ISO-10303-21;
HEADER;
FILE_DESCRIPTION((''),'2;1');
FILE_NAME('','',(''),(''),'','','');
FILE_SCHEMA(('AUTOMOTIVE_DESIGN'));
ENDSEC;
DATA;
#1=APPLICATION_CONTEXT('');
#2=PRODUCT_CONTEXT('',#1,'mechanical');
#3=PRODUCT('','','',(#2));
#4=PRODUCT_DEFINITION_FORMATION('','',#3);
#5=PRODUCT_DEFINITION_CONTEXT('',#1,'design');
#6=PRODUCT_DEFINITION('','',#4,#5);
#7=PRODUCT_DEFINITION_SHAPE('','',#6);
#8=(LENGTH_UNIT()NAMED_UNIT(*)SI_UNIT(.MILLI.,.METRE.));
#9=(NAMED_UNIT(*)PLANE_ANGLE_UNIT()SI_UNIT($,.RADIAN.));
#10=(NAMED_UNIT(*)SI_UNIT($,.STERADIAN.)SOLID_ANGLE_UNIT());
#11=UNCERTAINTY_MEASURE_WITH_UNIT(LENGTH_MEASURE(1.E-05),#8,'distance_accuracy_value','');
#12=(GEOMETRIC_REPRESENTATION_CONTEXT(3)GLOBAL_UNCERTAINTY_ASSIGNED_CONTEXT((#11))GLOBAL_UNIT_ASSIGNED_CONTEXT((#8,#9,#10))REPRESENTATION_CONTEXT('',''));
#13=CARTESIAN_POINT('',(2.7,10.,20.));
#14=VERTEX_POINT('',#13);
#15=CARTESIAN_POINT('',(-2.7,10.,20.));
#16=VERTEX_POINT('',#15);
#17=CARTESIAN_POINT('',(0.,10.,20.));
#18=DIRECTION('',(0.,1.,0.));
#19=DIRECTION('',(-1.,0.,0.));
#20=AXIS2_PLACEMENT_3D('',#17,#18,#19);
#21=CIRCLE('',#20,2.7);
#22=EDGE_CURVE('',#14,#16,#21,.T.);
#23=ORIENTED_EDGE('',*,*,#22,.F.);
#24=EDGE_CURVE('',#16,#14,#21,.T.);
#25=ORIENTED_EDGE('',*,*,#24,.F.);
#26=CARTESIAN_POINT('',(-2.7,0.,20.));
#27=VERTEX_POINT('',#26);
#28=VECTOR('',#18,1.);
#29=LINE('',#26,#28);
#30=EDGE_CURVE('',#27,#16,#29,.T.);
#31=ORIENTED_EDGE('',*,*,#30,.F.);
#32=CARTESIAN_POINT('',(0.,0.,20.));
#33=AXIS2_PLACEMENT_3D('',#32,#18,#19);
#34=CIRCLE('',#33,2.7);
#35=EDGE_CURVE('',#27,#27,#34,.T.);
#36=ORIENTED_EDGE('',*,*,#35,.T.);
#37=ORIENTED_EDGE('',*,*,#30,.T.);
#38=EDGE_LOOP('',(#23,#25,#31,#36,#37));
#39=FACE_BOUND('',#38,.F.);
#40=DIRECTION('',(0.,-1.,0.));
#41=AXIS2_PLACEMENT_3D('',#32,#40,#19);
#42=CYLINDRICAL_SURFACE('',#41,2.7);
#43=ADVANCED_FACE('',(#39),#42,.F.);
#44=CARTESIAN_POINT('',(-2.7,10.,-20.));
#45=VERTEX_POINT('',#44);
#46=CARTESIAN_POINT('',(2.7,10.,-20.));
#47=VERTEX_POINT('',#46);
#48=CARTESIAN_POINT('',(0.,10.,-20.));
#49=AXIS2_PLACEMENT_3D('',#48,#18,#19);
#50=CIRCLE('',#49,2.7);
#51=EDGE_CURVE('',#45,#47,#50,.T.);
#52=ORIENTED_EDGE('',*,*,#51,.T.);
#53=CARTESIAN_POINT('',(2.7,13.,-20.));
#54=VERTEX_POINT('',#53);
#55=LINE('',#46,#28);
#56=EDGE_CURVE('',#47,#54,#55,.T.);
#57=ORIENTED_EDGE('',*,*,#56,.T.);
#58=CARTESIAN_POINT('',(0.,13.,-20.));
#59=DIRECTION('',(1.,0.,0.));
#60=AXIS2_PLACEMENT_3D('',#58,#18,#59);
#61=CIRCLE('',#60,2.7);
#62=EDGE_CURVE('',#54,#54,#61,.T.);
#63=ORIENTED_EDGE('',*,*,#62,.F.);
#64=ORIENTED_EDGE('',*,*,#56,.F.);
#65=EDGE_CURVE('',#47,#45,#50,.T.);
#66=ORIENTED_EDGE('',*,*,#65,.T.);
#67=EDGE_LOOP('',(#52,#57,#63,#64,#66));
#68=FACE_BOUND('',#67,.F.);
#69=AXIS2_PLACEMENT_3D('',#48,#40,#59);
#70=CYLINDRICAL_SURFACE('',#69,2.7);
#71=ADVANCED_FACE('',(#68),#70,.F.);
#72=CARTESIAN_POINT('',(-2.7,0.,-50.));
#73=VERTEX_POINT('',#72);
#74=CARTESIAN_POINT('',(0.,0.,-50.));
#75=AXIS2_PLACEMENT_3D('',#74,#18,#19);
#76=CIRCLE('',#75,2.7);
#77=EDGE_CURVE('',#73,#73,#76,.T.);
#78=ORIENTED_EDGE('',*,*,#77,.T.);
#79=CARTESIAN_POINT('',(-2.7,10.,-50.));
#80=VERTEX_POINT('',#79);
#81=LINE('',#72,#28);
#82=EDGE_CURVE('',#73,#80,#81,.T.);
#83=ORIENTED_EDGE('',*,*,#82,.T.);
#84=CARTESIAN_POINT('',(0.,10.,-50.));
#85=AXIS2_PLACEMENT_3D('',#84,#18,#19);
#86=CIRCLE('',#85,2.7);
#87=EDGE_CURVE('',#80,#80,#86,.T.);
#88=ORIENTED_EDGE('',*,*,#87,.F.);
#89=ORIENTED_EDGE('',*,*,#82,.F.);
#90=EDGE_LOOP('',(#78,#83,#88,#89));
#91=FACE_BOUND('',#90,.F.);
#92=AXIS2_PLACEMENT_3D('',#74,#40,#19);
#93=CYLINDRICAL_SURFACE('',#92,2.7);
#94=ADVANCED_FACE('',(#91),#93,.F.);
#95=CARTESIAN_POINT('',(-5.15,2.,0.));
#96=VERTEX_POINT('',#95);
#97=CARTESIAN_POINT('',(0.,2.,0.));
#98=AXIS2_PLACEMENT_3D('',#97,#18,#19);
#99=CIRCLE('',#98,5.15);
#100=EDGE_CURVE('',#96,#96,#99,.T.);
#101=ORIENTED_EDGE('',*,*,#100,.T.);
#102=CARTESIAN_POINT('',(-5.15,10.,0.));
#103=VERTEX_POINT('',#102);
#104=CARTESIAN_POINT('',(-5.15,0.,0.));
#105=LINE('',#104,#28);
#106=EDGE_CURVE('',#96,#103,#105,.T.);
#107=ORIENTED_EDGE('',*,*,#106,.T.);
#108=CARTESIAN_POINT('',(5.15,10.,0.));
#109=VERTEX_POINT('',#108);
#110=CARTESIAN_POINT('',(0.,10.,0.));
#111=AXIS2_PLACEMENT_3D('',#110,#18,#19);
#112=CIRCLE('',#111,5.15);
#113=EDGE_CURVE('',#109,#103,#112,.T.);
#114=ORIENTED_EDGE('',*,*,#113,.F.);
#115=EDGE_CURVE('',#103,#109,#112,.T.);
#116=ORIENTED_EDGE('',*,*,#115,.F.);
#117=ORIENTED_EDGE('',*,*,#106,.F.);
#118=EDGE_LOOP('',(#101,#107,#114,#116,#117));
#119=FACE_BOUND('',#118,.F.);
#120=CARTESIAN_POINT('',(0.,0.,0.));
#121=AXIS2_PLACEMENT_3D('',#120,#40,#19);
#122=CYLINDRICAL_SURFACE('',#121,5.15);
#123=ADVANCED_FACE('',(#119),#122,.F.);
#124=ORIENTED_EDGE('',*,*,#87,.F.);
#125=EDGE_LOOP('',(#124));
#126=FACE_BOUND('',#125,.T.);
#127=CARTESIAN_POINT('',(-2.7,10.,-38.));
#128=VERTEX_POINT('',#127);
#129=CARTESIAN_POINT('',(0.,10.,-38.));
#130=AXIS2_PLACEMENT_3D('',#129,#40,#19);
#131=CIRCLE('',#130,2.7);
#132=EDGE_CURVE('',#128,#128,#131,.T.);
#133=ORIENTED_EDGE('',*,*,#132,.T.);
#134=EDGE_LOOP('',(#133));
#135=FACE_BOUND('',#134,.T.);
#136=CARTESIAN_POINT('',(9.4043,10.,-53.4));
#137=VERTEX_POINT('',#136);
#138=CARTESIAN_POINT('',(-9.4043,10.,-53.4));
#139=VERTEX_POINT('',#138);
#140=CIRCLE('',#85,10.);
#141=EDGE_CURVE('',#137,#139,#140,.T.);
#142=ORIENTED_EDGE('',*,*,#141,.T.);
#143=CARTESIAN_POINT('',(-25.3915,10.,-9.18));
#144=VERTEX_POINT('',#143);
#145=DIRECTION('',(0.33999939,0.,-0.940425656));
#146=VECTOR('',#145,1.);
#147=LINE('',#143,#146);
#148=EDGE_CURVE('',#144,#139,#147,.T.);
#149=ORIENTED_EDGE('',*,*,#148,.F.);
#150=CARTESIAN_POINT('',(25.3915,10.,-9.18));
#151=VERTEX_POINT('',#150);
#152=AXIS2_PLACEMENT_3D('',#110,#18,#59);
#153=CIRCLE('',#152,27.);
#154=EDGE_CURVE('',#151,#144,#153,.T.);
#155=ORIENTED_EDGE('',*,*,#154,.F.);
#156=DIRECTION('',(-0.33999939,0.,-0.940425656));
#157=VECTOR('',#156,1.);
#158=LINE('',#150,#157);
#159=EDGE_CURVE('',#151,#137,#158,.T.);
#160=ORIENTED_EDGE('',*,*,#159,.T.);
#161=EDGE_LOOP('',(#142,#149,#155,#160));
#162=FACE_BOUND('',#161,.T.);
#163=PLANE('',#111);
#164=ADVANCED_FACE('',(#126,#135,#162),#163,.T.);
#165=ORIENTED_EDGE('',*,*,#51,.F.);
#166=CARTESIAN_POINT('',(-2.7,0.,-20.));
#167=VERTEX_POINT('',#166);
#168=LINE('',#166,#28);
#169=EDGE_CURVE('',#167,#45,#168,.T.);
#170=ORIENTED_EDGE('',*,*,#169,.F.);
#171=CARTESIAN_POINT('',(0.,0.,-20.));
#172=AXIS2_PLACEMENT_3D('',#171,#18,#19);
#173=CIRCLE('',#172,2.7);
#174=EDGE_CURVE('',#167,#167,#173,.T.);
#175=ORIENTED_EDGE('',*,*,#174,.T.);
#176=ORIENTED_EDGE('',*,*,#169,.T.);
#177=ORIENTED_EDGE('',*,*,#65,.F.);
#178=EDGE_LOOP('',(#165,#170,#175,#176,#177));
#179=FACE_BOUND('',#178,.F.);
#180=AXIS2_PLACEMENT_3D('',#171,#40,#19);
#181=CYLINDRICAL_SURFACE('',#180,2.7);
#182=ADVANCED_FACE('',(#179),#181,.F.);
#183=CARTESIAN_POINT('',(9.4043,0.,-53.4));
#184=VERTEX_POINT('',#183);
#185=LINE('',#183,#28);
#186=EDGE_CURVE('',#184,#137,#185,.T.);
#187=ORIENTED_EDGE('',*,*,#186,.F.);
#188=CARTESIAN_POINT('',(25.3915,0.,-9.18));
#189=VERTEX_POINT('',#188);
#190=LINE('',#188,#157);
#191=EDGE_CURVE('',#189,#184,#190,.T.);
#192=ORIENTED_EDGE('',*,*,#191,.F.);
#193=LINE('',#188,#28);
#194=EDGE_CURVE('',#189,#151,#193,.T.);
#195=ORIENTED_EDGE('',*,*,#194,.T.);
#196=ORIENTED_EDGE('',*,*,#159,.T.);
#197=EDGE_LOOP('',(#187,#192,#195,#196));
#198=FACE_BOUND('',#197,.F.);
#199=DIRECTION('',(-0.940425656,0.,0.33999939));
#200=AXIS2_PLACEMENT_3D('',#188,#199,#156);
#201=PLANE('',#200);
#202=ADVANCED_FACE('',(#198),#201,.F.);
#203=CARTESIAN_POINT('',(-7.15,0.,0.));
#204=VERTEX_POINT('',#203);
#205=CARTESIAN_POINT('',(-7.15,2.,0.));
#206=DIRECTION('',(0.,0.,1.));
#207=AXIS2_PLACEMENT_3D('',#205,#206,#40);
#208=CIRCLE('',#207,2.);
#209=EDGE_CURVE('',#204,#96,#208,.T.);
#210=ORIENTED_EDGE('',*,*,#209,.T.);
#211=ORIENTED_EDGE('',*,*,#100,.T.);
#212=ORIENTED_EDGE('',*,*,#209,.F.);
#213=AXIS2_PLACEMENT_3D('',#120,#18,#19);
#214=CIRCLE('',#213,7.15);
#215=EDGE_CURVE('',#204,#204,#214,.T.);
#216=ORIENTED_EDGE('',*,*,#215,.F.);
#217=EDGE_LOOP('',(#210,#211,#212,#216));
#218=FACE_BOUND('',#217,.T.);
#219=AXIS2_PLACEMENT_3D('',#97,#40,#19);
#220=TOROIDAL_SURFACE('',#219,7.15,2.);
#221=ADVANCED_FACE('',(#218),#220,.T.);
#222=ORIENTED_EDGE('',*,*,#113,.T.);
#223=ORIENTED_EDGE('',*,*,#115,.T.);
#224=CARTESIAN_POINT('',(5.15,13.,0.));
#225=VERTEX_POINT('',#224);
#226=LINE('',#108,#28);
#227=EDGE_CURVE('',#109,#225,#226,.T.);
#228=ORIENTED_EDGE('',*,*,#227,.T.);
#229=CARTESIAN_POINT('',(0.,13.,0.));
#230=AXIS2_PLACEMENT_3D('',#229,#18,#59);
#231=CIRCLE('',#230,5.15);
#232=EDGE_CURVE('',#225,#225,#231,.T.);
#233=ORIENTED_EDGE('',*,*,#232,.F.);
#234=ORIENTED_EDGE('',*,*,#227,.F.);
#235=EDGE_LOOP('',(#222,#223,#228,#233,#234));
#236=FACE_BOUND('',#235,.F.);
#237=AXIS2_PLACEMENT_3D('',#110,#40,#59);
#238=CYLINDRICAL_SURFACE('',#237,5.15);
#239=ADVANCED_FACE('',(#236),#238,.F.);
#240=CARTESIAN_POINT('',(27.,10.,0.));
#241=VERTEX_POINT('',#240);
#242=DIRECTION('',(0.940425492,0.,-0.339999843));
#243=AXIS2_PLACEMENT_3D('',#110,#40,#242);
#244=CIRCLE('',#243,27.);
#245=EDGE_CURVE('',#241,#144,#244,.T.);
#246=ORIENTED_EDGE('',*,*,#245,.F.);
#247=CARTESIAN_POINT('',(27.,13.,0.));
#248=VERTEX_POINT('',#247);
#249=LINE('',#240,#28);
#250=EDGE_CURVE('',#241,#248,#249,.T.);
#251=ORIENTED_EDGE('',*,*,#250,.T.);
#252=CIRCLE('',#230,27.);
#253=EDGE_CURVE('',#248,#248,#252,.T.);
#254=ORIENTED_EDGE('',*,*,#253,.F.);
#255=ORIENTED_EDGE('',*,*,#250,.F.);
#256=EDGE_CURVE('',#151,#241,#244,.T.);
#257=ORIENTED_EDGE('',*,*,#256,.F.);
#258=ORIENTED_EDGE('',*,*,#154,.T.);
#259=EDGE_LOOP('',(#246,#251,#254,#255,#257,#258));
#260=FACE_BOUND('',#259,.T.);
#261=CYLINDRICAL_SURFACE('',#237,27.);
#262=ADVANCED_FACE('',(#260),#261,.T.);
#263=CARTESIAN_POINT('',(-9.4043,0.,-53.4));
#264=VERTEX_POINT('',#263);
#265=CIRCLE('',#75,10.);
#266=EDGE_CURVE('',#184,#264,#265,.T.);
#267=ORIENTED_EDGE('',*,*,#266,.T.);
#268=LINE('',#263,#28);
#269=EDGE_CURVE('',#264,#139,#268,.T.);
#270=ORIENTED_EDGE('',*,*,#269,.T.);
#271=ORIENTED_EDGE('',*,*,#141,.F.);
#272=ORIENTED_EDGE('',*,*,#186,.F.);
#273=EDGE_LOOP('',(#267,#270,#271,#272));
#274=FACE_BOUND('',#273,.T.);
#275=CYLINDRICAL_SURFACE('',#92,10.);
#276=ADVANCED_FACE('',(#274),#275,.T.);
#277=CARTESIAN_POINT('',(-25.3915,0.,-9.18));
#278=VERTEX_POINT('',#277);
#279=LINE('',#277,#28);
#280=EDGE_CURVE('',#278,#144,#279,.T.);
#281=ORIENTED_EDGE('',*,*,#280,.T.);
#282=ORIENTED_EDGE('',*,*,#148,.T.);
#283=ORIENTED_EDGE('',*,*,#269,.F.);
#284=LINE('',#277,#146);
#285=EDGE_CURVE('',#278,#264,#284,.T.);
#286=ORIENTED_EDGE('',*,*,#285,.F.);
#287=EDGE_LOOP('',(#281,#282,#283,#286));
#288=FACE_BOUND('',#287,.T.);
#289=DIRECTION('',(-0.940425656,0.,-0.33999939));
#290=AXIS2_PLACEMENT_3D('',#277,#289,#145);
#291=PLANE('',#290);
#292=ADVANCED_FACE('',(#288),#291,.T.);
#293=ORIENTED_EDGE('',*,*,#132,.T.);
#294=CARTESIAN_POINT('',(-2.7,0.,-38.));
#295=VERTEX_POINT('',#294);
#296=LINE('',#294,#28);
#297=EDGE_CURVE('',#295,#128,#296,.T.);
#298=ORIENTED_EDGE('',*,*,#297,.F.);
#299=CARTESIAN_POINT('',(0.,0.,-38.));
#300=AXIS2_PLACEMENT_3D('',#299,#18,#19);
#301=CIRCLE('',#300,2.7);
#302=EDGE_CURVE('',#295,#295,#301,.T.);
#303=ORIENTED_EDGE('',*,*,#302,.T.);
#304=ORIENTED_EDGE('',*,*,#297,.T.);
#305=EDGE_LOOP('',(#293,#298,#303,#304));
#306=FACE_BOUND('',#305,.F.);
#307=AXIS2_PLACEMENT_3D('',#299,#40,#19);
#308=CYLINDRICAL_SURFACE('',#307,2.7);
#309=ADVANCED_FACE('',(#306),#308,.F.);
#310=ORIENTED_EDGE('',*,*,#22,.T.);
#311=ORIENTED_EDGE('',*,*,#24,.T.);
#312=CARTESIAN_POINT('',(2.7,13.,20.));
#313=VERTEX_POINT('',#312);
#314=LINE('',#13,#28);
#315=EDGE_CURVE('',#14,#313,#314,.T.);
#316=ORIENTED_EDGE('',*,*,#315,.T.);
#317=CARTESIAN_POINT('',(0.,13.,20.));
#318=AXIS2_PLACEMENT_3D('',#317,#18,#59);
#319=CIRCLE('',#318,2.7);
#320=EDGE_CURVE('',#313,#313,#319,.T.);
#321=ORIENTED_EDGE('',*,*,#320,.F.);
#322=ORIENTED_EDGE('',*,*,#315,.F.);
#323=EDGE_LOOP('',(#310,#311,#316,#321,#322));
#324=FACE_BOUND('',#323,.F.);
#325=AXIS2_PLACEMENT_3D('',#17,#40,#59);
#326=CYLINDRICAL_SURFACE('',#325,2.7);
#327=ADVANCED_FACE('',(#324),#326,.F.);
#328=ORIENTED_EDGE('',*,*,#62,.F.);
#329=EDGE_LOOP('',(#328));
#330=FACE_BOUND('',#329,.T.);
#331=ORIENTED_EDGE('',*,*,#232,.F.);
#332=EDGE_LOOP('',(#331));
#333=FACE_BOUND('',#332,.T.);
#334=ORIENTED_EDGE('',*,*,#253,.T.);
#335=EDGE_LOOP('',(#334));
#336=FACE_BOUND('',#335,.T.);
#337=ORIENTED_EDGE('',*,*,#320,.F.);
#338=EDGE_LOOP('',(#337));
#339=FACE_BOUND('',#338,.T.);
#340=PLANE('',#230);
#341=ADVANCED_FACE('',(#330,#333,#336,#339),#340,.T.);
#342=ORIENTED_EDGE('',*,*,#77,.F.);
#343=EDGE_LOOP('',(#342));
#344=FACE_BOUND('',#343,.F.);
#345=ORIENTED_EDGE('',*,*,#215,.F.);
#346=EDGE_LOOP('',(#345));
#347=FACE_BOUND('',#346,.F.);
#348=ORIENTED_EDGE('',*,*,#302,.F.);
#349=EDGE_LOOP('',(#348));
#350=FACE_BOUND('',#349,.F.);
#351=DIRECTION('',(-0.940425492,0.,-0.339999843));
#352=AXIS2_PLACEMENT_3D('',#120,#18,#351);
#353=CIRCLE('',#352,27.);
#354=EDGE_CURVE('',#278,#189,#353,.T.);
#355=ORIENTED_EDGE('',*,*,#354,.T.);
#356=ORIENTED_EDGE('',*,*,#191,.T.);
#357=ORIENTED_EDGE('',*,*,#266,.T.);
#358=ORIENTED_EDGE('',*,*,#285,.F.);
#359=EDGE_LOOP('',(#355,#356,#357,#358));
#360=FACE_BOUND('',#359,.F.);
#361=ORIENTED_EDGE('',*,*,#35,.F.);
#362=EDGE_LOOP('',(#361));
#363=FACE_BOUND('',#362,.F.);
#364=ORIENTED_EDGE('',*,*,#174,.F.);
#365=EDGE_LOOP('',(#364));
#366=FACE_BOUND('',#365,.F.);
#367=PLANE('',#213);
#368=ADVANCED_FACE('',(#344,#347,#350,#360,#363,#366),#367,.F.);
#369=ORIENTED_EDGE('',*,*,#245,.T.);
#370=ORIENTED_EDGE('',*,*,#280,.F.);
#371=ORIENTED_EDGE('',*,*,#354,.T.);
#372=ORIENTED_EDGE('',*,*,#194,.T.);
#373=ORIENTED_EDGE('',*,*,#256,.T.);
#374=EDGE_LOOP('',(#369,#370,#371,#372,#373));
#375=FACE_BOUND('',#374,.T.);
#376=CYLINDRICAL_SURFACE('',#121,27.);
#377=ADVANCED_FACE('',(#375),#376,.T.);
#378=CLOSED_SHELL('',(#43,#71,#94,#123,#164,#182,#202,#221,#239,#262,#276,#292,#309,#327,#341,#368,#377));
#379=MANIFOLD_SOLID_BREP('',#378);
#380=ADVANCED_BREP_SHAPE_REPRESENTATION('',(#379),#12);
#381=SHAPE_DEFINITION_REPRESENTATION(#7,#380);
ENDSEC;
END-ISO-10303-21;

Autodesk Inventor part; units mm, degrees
ref_plane "YZ Plane" through (0, 0, 0) normal (1, 0, 0) x (0, 1, 0)
ref_plane "XZ Plane" through (0, 0, 0) normal (0, 1, 0) x (-1, 0, 0)
ref_plane "XY Plane" through (0, 0, 0) normal (0, 0, 1) x (1, 0, 0)
sketch "Boceto1" plane through (0, 0, 0) normal (0, 1, 0) x (-1, 0, 0)
  circle A0 centre (0, 0) radius 27
  circle A1 centre (0, -50) radius 10
  circle A2 centre (0, 0) radius 5.15
  line L0 (25.3915, -9.18) -> (9.4043, -53.4)
  line L1 (-25.3915, -9.18) -> (-9.4043, -53.4)
  circle A3 centre (0, -50) radius 2.7
  circle A4 centre (0, -38) radius 2.7
  circle A5 centre (0, -20) radius 2.7
  circle A6 centre (0, 20) radius 2.7
  dimension "d0" = 10.3
  dimension "d1" = 5.4
  dimension "d2" = 5.4
  dimension "d3" = 12
  dimension "d4" = 50
  dimension "d5" = 20
  dimension "d6" = 54
  dimension "d10" = 5.4
  dimension "d11" = 5.4
  dimension "d12" = 20
  dimension "d13" = 20
extrude "Extrusión1" add sketch "Boceto1" along normal blind 10 contours A0 | A0 L0 A1 A4 L1 | A1 A4 picked at (1.999, -42.9031)
sketch "Boceto3" plane through (0, 10, 0) normal (0, 1, 0) x (1, 0, 0)
  circle A0 centre (0, 0) radius 27
  circle A1 centre (0, -20) radius 2.7 projected
  circle A2 centre (0, 0) radius 5.15 projected
  circle A3 centre (0, 20) radius 2.7 projected
extrude "Extrusión2" add sketch "Boceto3" along normal blind 3
fillet "Empalme1" radius 2 1 edges at (5.15, 0, 0)
properties part number "Beam support"
